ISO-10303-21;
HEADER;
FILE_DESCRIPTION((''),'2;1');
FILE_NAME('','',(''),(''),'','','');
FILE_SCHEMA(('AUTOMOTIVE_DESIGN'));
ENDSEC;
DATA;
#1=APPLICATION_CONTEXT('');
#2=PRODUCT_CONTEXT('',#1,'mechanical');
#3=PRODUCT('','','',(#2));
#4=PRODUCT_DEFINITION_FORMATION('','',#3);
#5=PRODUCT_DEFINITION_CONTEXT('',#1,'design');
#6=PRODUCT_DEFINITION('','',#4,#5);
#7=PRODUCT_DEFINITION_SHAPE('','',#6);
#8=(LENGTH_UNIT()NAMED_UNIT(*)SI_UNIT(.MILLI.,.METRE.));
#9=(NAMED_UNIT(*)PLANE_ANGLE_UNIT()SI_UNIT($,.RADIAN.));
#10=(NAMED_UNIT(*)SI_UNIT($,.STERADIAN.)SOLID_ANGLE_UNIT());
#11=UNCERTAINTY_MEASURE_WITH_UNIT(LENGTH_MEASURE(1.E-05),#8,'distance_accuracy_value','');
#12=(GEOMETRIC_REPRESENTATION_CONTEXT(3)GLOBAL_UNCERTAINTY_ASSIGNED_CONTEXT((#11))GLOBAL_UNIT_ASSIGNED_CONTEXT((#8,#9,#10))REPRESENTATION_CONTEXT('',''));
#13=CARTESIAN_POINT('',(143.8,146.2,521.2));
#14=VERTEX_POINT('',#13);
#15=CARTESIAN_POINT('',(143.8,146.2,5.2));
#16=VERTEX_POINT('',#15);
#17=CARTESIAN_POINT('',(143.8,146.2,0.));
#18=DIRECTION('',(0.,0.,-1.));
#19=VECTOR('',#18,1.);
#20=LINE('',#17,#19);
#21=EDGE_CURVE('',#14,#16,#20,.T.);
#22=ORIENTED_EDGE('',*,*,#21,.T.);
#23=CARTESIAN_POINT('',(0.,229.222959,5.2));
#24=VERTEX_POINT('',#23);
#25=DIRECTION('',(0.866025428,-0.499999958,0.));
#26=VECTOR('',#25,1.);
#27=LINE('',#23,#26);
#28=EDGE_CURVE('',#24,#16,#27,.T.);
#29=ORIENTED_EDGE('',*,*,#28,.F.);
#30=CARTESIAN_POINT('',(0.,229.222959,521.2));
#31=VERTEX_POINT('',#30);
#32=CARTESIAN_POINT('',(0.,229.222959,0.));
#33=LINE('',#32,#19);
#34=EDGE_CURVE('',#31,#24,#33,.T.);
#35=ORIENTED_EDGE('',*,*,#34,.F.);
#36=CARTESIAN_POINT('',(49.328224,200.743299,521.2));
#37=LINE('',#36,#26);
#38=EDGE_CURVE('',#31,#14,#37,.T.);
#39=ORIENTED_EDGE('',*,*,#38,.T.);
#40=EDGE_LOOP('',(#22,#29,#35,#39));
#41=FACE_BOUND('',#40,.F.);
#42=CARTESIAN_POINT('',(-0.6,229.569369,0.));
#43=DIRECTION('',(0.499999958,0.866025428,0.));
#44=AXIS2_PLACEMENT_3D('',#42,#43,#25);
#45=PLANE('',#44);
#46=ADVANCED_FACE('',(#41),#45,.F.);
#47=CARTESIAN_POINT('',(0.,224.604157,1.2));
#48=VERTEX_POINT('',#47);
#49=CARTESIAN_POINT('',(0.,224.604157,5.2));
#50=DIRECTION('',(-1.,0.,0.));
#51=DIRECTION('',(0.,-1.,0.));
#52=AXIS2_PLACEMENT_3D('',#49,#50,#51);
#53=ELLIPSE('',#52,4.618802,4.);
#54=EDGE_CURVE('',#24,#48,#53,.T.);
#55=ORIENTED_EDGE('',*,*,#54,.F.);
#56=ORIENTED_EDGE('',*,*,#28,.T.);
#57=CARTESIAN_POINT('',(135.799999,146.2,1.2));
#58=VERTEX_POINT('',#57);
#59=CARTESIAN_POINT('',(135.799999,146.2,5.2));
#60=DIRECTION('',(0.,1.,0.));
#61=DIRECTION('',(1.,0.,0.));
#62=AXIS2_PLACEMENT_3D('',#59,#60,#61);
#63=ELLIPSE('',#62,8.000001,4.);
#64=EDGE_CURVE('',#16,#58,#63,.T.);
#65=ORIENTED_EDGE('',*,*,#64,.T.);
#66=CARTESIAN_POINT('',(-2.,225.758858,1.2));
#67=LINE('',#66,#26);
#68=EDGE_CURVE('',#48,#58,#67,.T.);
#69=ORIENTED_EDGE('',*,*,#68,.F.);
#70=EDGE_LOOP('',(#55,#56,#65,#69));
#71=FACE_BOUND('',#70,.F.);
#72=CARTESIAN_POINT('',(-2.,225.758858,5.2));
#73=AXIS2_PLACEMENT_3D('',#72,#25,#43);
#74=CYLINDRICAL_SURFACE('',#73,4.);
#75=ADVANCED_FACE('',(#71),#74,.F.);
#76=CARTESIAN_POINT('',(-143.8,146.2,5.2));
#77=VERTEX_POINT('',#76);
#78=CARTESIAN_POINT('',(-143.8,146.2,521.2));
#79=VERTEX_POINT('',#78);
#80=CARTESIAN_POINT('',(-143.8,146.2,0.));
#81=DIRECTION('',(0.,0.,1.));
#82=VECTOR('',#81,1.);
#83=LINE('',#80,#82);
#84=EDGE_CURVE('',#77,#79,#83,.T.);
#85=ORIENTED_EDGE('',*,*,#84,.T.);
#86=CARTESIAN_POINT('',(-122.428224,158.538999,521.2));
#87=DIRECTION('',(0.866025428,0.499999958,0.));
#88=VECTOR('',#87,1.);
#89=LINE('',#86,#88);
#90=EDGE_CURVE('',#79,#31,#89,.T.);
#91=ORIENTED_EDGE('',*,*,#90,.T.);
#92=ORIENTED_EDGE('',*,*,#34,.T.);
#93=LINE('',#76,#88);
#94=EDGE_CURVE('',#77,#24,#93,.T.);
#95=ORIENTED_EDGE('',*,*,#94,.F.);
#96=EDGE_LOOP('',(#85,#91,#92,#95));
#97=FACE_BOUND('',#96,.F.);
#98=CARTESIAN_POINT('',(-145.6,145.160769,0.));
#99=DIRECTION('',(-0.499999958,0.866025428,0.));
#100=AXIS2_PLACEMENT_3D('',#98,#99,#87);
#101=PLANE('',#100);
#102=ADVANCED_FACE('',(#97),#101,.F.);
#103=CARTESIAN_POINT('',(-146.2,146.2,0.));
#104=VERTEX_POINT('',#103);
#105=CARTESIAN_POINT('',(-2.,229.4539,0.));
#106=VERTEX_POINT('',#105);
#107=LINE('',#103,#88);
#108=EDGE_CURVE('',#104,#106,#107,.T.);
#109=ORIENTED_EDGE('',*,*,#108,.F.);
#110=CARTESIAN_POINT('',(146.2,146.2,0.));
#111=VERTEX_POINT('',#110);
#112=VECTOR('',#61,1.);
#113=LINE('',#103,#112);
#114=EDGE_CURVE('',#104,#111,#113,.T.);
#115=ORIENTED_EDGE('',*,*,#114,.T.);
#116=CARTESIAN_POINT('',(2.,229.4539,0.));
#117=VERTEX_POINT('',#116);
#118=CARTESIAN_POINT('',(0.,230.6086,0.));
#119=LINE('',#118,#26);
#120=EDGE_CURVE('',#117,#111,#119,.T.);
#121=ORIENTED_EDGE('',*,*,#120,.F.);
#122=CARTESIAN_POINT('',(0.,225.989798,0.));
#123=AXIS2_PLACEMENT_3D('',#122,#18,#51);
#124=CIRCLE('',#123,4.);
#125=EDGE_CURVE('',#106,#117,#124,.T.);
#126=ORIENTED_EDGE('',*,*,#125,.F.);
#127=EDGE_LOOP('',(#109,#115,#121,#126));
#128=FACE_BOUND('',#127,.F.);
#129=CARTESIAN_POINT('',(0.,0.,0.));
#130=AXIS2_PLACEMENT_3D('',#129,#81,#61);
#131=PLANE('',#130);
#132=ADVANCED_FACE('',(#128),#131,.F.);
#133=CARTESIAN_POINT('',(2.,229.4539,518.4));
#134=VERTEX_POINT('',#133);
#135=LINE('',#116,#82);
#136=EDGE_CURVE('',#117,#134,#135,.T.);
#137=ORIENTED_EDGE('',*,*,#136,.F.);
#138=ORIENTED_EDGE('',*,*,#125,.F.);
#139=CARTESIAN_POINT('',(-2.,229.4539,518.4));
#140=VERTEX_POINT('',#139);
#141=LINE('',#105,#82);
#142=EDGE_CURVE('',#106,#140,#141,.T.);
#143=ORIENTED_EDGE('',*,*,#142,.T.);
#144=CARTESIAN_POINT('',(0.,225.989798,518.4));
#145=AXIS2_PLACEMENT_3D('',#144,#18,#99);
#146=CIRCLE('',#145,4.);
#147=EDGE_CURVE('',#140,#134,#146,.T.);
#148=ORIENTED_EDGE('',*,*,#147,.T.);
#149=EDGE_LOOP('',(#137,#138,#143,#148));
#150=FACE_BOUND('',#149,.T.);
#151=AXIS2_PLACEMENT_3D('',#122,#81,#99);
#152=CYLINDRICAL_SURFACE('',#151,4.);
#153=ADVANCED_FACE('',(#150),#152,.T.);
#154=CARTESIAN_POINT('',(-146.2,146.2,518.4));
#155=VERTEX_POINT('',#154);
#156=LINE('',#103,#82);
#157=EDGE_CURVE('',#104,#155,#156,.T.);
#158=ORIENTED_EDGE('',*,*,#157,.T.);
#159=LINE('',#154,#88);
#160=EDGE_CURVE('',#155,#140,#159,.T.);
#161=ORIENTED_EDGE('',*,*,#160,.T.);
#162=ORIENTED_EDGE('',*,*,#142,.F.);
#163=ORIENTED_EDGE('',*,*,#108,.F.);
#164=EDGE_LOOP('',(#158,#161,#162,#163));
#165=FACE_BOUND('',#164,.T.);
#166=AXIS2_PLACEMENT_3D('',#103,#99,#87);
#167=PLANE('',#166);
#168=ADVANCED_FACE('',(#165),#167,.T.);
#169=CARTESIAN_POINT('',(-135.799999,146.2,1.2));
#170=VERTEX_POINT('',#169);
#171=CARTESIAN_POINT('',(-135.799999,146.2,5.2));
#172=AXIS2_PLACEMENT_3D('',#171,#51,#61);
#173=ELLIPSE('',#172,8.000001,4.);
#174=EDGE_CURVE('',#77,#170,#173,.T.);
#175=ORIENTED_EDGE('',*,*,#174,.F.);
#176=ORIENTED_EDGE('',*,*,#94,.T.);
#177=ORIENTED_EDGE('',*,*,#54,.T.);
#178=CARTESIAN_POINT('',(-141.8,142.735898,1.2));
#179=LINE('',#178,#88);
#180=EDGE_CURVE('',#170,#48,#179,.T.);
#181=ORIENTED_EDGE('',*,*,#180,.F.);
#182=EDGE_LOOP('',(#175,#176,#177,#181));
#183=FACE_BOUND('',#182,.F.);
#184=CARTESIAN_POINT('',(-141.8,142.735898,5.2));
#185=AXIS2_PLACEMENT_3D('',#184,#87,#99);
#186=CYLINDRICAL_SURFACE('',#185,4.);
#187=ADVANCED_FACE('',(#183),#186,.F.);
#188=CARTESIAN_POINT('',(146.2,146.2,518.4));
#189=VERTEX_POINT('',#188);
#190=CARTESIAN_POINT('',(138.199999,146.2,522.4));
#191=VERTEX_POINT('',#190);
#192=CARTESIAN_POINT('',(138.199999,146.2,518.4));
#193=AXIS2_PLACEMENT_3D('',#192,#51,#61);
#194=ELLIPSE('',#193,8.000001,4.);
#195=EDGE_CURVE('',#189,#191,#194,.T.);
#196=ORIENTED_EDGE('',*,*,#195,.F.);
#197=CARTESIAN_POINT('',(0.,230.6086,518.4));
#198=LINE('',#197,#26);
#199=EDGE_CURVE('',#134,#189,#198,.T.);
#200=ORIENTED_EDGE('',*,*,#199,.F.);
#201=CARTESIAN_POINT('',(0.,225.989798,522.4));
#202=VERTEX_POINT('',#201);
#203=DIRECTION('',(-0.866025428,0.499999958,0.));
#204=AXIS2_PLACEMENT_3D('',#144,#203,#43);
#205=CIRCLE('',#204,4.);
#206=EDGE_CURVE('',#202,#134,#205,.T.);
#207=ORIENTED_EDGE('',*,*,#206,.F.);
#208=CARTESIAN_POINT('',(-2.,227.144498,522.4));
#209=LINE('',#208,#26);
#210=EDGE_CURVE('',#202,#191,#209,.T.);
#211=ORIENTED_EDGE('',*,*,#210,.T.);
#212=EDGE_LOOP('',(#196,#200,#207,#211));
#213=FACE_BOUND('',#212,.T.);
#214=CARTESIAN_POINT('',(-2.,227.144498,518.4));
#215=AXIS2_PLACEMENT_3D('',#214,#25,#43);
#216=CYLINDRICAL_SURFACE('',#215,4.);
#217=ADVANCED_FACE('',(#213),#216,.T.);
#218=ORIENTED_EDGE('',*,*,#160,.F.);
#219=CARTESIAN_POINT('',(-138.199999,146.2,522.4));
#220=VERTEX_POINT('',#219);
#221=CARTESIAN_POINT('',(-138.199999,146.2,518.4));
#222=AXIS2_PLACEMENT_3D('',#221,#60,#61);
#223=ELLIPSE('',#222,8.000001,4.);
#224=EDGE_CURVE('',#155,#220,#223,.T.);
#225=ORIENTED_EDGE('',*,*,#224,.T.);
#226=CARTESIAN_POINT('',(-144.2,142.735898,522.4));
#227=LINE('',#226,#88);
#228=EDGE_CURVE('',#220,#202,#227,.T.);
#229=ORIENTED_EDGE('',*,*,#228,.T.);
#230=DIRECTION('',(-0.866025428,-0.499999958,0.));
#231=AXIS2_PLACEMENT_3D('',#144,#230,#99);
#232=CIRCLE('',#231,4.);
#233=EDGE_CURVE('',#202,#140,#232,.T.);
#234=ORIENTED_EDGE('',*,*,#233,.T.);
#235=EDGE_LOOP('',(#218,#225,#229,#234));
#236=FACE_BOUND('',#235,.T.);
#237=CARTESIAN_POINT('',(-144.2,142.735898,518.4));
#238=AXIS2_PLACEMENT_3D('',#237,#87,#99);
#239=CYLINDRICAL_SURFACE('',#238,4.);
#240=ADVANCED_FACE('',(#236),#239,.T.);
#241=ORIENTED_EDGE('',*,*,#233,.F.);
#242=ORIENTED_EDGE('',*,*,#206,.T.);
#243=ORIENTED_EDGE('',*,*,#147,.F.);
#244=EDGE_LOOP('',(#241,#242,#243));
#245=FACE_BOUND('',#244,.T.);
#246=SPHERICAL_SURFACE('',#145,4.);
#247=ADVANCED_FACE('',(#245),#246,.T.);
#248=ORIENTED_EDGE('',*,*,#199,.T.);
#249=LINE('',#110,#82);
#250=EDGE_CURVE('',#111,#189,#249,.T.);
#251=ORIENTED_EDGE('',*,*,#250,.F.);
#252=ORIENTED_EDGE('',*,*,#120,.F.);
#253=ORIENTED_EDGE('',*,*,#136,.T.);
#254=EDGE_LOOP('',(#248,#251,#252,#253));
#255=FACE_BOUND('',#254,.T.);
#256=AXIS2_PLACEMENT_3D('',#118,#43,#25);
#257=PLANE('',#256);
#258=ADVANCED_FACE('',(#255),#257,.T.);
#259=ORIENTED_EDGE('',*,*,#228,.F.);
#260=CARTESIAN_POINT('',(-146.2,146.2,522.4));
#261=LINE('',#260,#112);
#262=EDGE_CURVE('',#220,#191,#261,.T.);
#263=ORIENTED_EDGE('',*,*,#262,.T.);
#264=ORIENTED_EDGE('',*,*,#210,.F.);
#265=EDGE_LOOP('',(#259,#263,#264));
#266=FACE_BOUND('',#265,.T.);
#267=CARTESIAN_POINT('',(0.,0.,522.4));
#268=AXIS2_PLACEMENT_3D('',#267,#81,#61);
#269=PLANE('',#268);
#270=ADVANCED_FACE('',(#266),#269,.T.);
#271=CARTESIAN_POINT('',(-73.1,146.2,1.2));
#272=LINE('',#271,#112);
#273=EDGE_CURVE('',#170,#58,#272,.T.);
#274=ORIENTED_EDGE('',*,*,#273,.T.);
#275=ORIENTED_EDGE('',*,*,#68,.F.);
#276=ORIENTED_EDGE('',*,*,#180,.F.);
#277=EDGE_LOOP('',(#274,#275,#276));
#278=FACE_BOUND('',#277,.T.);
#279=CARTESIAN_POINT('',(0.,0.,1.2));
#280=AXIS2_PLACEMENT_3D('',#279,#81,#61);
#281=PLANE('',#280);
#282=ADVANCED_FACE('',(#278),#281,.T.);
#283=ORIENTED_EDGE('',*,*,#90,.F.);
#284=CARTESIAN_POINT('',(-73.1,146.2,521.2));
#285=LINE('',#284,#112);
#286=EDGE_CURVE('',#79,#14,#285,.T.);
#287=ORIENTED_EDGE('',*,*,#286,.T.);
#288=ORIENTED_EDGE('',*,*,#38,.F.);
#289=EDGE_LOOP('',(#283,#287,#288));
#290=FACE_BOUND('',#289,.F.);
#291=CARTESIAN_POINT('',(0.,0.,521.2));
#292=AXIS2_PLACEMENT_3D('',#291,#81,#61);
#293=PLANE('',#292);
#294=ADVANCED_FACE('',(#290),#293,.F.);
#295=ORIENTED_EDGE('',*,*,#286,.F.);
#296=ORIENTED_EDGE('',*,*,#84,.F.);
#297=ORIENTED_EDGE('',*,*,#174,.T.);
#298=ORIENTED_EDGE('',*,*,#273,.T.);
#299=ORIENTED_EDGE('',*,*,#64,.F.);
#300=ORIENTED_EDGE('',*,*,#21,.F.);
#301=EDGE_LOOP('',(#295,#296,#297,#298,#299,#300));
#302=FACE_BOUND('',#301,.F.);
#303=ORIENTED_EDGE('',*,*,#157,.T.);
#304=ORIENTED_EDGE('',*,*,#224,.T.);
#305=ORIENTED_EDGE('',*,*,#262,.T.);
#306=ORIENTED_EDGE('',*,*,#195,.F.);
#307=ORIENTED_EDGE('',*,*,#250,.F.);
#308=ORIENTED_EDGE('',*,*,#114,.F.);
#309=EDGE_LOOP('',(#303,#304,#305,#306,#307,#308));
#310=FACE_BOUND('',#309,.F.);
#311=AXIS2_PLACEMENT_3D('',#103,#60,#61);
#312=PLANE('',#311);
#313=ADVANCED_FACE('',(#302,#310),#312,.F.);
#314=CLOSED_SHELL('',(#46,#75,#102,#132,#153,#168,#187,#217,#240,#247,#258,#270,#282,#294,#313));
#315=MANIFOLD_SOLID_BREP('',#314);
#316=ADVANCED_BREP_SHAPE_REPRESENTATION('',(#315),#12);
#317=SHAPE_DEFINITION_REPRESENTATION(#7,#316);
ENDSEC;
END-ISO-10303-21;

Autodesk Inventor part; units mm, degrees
ref_plane "YZ Plane" through (0, 0, 0) normal (1, 0, 0) x (0, 1, 0)
ref_plane "XZ Plane" through (0, 0, 0) normal (0, 1, 0) x (-1, 0, 0)
ref_plane "XY Plane" through (0, 0, 0) normal (0, 0, 1) x (1, 0, 0)
sketch "Boceto1" plane through (0, 0, 0) normal (0, 0, 1) x (1, 0, 0)
  line L0 (-146.2, 146.2) -> (146.2, 146.2)
  line L1 (-146.2, 146.2) -> (0, 230.6086)
  line L2 (-146.2, 146.2) -> (32.5033, 146.2) construction
  line L3 (0, 230.6086) -> (146.2, 146.2)
  point P0 (0, 0)
  dimension "d2" = 30
extrude "Extrusión1" add sketch "Boceto1" along normal blind 522.4
shell "Vaciado1" thickness 1.2 removed faces 1 at (-48.7333, 146.2, 174.1333)
fillet "Empalme1" radius 4 5 edges at (0, 230.6086, 261.2) (-73.1, 188.4043, 522.4) (73.1, 188.4043, 522.4) (71.9, 187.7115, 1.2) (-71.9, 187.7115, 1.2)
properties part number "tapa_marco"
